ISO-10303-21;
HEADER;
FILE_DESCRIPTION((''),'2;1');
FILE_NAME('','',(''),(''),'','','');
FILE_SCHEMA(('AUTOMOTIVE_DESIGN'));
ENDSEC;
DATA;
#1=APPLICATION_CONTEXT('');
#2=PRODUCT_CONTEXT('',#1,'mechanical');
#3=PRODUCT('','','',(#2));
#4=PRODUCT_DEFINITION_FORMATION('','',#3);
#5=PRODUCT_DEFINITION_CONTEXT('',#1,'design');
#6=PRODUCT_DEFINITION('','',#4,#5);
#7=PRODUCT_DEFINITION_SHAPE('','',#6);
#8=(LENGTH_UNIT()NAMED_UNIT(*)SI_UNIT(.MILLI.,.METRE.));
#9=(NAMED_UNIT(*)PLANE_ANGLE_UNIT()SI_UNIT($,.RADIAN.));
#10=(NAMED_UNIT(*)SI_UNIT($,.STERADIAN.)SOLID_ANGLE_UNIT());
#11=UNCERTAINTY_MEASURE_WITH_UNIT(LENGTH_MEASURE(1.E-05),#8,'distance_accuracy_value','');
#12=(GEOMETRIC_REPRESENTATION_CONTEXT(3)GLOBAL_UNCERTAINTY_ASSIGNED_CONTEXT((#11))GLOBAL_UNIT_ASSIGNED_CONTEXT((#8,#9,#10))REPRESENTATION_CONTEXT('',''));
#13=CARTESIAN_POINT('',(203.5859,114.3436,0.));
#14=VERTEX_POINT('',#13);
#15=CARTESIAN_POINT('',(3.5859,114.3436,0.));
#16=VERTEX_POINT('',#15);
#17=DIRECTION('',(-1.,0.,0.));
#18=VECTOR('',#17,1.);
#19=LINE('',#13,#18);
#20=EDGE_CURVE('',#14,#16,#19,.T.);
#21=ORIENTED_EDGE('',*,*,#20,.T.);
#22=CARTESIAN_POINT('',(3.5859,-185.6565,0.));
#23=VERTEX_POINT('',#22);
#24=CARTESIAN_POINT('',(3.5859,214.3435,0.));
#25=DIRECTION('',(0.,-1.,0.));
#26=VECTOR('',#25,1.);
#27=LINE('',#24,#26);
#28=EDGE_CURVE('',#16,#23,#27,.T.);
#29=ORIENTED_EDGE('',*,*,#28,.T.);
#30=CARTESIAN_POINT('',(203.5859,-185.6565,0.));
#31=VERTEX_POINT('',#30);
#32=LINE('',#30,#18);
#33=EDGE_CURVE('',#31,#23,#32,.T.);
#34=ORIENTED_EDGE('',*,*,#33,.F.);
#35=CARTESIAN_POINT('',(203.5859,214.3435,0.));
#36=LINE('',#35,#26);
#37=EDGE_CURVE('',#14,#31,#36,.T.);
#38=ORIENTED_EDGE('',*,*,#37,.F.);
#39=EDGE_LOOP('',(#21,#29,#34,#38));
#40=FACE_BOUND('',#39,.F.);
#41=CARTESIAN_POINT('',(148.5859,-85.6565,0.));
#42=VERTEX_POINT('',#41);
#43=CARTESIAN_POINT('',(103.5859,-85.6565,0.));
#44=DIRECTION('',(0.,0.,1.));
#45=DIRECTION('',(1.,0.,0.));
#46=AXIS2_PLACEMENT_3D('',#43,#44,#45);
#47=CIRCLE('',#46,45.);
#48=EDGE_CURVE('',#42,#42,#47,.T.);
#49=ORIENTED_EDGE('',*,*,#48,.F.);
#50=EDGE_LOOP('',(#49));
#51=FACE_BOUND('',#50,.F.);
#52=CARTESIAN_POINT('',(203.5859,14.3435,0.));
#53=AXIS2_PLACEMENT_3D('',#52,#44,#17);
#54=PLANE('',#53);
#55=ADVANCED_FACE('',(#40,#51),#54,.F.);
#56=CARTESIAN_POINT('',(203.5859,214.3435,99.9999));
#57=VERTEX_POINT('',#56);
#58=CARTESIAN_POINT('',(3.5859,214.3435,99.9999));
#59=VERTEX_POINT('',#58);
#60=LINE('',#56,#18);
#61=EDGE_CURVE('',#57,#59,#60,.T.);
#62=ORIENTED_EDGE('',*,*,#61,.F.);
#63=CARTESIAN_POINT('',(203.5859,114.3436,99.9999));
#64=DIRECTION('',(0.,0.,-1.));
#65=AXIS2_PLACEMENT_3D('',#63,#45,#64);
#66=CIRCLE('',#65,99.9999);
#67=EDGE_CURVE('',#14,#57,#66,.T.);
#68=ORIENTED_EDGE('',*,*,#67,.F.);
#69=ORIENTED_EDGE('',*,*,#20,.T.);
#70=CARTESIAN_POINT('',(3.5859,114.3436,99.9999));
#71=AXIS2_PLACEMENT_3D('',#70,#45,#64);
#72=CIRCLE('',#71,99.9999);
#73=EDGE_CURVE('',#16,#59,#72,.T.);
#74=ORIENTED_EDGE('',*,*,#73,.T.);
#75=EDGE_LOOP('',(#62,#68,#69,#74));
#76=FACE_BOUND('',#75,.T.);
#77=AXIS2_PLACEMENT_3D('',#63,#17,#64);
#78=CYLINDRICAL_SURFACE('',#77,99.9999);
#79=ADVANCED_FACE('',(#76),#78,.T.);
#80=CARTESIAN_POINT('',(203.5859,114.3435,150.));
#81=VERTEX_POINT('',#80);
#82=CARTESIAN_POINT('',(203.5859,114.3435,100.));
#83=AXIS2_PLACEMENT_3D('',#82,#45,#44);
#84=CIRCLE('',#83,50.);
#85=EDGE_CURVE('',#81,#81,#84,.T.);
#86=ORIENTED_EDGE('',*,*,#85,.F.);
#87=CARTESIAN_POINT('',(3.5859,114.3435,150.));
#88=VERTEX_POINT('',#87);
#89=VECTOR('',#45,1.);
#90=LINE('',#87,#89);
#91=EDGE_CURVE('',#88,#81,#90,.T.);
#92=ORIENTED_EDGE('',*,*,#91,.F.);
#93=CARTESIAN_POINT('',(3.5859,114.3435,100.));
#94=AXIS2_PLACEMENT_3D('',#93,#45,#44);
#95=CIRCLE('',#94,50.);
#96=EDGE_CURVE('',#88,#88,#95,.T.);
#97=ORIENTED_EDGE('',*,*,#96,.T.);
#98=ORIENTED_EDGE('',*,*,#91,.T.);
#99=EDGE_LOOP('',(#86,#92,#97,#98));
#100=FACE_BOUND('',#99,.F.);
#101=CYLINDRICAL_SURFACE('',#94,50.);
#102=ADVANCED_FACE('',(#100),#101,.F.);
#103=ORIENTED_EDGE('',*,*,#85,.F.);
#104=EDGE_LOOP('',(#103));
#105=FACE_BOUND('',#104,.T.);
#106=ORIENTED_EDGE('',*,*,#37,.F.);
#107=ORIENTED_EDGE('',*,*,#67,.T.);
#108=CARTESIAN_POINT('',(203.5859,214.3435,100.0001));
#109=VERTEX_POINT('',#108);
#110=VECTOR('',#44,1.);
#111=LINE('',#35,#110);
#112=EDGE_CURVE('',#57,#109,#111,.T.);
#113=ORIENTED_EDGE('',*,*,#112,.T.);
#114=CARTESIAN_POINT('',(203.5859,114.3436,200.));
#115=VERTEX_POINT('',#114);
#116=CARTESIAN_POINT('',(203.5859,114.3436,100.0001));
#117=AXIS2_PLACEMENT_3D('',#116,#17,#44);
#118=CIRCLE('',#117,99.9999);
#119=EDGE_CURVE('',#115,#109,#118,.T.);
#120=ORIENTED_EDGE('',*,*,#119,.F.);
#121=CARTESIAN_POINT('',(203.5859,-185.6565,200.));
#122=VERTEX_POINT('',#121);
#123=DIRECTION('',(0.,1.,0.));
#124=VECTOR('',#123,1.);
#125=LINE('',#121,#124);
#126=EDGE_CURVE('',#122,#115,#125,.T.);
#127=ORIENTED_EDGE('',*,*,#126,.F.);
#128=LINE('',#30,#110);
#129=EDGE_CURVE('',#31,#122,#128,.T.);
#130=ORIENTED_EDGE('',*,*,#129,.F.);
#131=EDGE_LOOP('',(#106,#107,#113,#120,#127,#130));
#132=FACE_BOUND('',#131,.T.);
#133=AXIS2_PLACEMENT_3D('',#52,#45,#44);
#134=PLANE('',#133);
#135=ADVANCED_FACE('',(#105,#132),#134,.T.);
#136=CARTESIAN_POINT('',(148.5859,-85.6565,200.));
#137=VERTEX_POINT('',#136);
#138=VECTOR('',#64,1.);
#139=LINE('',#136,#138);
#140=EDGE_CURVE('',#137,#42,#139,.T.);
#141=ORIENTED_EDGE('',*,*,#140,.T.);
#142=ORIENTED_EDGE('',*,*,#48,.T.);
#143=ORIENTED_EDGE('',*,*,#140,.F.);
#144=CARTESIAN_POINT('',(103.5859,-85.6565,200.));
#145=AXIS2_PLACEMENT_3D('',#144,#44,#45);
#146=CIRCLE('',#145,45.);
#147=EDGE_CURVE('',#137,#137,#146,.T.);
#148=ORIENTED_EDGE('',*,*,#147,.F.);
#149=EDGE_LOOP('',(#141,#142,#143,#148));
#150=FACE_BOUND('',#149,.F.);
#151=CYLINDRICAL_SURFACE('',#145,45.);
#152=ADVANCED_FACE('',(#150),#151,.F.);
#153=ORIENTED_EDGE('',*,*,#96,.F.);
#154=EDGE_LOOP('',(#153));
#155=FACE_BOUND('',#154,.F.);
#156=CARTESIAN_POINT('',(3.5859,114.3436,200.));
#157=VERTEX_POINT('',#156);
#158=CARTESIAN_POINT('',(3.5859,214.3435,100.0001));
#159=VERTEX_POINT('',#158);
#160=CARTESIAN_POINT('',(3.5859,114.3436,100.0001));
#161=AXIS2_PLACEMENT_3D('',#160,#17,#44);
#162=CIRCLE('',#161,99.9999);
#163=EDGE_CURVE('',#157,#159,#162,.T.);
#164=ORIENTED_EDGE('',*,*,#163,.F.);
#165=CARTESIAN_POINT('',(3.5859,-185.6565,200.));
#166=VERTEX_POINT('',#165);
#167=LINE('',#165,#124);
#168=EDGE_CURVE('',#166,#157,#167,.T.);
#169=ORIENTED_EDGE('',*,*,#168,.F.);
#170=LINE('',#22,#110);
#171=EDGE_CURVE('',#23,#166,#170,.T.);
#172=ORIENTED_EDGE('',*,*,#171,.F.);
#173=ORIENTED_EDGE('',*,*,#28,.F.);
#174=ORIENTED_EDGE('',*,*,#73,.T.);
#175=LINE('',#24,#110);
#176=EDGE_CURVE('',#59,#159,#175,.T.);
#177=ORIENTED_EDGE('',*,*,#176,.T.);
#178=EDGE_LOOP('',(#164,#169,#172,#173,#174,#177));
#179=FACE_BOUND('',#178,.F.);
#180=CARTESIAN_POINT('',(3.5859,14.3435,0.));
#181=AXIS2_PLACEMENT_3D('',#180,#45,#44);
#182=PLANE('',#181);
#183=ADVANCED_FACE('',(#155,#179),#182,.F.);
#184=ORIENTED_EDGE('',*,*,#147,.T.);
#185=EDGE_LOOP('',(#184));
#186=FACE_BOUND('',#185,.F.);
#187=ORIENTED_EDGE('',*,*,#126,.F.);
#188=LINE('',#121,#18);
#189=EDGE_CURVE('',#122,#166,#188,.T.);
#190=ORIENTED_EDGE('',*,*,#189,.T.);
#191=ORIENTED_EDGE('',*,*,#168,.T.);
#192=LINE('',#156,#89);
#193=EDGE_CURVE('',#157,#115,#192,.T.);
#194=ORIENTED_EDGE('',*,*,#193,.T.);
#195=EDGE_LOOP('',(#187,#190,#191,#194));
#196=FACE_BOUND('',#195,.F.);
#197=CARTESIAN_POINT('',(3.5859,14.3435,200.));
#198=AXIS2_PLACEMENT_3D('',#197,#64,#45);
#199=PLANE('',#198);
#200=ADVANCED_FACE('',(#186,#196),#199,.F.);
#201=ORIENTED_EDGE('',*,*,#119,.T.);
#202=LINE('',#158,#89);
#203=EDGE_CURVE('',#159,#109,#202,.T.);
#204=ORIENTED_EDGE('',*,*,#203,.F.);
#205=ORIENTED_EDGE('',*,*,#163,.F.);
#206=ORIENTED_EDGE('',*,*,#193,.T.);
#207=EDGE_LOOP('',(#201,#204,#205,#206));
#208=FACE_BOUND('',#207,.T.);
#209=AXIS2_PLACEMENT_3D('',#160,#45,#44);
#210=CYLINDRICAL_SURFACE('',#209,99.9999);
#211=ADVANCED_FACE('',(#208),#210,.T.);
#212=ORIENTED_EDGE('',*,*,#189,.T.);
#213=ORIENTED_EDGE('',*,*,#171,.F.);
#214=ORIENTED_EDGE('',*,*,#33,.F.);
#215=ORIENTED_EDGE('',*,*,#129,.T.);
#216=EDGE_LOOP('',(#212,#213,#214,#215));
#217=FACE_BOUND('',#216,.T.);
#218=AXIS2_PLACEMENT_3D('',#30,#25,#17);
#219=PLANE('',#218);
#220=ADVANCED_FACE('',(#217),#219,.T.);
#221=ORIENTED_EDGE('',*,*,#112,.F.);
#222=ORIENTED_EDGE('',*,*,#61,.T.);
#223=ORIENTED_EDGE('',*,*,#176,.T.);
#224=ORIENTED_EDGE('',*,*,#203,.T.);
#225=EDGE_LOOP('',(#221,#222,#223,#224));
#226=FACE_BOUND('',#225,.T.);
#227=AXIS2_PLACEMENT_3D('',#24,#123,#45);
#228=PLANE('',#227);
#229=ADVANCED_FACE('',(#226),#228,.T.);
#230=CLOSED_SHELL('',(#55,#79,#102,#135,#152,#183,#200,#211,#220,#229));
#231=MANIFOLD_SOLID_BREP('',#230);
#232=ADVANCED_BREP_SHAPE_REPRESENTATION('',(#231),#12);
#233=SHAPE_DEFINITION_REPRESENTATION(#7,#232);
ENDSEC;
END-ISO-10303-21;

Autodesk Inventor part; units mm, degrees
ref_plane "YZ Plane" through (0, 0, 0) normal (1, 0, 0) x (0, 1, 0)
ref_plane "XZ Plane" through (0, 0, 0) normal (0, 1, 0) x (-1, 0, 0)
ref_plane "XY Plane" through (0, 0, 0) normal (0, 0, 1) x (1, 0, 0)
sketch "Sketch1" plane through (0, 0, 0) normal (0, 0, 1) x (1, 0, 0)
  line L0 (3.5859, 14.3435) -> (203.5859, 14.3435)
  line L1 (203.5859, 14.3435) -> (203.5859, -185.6565)
  line L2 (203.5859, -185.6565) -> (3.5859, -185.6565)
  line L3 (3.5859, -185.6565) -> (3.5859, 14.3435)
  point P0 (0, 0)
  dimension "d0" = 200
  dimension "d1" = 200
extrude "Extrusion1" add sketch "Sketch1" along normal blind 200
sketch "Sketch2" plane through (0, 0, 200) normal (0, 0, 1) x (1, 0, 0)
  line L0 (203.5859, 14.3435) -> (3.5859, 14.3435) projected
  line L1 (3.5859, -185.6565) -> (203.5859, -185.6565) projected
  circle A0 centre (103.5859, -85.6565) radius 45
  point P0 (0, 0)
  dimension "d4" = 90
extrude "Extrusion2" cut sketch "Sketch2" against normal blind 200
thread "Thread1" size "M90x6" class "6H" standard "ANSI Metric M Profile" full length
sketch "Sketch3" plane through (3.5859, 14.3435, 0) normal (0, 1, 0) x (1, 0, 0)
  line L0 (0, -200) -> (200, -200) projected
  line L1 (200, 0) -> (200, -200) projected
  line L2 (0, -200) -> (200, -200)
  line L3 (200, -200) -> (200, 0)
  line L4 (200, 0) -> (0, 0)
  line L5 (0, 0) -> (0, -200)
  point P0 (-3.5859, 0)
extrude "Extrusion3" add sketch "Sketch3" along normal blind 200
fillet "Fillet1" radius 100 2 edges at (103.5859, 214.3435, 0) (103.5859, 214.3435, 200)
sketch "Sketch4" plane through (3.5859, -185.6565, 0) normal (-1, 0, 0) x (0, 0, 1)
  arc A0 (200, 300) -> (0, 300) centre (100, 300) ccw projected
  circle A1 centre (100, 300) radius 25
  point P0 (0, 185.6565)
  dimension "d12" = 50
hole "Hole1" at (3.5859, 114.3435, 100) direction (1, 0, 0) diameter 100 end through all
properties part number "klocek"
